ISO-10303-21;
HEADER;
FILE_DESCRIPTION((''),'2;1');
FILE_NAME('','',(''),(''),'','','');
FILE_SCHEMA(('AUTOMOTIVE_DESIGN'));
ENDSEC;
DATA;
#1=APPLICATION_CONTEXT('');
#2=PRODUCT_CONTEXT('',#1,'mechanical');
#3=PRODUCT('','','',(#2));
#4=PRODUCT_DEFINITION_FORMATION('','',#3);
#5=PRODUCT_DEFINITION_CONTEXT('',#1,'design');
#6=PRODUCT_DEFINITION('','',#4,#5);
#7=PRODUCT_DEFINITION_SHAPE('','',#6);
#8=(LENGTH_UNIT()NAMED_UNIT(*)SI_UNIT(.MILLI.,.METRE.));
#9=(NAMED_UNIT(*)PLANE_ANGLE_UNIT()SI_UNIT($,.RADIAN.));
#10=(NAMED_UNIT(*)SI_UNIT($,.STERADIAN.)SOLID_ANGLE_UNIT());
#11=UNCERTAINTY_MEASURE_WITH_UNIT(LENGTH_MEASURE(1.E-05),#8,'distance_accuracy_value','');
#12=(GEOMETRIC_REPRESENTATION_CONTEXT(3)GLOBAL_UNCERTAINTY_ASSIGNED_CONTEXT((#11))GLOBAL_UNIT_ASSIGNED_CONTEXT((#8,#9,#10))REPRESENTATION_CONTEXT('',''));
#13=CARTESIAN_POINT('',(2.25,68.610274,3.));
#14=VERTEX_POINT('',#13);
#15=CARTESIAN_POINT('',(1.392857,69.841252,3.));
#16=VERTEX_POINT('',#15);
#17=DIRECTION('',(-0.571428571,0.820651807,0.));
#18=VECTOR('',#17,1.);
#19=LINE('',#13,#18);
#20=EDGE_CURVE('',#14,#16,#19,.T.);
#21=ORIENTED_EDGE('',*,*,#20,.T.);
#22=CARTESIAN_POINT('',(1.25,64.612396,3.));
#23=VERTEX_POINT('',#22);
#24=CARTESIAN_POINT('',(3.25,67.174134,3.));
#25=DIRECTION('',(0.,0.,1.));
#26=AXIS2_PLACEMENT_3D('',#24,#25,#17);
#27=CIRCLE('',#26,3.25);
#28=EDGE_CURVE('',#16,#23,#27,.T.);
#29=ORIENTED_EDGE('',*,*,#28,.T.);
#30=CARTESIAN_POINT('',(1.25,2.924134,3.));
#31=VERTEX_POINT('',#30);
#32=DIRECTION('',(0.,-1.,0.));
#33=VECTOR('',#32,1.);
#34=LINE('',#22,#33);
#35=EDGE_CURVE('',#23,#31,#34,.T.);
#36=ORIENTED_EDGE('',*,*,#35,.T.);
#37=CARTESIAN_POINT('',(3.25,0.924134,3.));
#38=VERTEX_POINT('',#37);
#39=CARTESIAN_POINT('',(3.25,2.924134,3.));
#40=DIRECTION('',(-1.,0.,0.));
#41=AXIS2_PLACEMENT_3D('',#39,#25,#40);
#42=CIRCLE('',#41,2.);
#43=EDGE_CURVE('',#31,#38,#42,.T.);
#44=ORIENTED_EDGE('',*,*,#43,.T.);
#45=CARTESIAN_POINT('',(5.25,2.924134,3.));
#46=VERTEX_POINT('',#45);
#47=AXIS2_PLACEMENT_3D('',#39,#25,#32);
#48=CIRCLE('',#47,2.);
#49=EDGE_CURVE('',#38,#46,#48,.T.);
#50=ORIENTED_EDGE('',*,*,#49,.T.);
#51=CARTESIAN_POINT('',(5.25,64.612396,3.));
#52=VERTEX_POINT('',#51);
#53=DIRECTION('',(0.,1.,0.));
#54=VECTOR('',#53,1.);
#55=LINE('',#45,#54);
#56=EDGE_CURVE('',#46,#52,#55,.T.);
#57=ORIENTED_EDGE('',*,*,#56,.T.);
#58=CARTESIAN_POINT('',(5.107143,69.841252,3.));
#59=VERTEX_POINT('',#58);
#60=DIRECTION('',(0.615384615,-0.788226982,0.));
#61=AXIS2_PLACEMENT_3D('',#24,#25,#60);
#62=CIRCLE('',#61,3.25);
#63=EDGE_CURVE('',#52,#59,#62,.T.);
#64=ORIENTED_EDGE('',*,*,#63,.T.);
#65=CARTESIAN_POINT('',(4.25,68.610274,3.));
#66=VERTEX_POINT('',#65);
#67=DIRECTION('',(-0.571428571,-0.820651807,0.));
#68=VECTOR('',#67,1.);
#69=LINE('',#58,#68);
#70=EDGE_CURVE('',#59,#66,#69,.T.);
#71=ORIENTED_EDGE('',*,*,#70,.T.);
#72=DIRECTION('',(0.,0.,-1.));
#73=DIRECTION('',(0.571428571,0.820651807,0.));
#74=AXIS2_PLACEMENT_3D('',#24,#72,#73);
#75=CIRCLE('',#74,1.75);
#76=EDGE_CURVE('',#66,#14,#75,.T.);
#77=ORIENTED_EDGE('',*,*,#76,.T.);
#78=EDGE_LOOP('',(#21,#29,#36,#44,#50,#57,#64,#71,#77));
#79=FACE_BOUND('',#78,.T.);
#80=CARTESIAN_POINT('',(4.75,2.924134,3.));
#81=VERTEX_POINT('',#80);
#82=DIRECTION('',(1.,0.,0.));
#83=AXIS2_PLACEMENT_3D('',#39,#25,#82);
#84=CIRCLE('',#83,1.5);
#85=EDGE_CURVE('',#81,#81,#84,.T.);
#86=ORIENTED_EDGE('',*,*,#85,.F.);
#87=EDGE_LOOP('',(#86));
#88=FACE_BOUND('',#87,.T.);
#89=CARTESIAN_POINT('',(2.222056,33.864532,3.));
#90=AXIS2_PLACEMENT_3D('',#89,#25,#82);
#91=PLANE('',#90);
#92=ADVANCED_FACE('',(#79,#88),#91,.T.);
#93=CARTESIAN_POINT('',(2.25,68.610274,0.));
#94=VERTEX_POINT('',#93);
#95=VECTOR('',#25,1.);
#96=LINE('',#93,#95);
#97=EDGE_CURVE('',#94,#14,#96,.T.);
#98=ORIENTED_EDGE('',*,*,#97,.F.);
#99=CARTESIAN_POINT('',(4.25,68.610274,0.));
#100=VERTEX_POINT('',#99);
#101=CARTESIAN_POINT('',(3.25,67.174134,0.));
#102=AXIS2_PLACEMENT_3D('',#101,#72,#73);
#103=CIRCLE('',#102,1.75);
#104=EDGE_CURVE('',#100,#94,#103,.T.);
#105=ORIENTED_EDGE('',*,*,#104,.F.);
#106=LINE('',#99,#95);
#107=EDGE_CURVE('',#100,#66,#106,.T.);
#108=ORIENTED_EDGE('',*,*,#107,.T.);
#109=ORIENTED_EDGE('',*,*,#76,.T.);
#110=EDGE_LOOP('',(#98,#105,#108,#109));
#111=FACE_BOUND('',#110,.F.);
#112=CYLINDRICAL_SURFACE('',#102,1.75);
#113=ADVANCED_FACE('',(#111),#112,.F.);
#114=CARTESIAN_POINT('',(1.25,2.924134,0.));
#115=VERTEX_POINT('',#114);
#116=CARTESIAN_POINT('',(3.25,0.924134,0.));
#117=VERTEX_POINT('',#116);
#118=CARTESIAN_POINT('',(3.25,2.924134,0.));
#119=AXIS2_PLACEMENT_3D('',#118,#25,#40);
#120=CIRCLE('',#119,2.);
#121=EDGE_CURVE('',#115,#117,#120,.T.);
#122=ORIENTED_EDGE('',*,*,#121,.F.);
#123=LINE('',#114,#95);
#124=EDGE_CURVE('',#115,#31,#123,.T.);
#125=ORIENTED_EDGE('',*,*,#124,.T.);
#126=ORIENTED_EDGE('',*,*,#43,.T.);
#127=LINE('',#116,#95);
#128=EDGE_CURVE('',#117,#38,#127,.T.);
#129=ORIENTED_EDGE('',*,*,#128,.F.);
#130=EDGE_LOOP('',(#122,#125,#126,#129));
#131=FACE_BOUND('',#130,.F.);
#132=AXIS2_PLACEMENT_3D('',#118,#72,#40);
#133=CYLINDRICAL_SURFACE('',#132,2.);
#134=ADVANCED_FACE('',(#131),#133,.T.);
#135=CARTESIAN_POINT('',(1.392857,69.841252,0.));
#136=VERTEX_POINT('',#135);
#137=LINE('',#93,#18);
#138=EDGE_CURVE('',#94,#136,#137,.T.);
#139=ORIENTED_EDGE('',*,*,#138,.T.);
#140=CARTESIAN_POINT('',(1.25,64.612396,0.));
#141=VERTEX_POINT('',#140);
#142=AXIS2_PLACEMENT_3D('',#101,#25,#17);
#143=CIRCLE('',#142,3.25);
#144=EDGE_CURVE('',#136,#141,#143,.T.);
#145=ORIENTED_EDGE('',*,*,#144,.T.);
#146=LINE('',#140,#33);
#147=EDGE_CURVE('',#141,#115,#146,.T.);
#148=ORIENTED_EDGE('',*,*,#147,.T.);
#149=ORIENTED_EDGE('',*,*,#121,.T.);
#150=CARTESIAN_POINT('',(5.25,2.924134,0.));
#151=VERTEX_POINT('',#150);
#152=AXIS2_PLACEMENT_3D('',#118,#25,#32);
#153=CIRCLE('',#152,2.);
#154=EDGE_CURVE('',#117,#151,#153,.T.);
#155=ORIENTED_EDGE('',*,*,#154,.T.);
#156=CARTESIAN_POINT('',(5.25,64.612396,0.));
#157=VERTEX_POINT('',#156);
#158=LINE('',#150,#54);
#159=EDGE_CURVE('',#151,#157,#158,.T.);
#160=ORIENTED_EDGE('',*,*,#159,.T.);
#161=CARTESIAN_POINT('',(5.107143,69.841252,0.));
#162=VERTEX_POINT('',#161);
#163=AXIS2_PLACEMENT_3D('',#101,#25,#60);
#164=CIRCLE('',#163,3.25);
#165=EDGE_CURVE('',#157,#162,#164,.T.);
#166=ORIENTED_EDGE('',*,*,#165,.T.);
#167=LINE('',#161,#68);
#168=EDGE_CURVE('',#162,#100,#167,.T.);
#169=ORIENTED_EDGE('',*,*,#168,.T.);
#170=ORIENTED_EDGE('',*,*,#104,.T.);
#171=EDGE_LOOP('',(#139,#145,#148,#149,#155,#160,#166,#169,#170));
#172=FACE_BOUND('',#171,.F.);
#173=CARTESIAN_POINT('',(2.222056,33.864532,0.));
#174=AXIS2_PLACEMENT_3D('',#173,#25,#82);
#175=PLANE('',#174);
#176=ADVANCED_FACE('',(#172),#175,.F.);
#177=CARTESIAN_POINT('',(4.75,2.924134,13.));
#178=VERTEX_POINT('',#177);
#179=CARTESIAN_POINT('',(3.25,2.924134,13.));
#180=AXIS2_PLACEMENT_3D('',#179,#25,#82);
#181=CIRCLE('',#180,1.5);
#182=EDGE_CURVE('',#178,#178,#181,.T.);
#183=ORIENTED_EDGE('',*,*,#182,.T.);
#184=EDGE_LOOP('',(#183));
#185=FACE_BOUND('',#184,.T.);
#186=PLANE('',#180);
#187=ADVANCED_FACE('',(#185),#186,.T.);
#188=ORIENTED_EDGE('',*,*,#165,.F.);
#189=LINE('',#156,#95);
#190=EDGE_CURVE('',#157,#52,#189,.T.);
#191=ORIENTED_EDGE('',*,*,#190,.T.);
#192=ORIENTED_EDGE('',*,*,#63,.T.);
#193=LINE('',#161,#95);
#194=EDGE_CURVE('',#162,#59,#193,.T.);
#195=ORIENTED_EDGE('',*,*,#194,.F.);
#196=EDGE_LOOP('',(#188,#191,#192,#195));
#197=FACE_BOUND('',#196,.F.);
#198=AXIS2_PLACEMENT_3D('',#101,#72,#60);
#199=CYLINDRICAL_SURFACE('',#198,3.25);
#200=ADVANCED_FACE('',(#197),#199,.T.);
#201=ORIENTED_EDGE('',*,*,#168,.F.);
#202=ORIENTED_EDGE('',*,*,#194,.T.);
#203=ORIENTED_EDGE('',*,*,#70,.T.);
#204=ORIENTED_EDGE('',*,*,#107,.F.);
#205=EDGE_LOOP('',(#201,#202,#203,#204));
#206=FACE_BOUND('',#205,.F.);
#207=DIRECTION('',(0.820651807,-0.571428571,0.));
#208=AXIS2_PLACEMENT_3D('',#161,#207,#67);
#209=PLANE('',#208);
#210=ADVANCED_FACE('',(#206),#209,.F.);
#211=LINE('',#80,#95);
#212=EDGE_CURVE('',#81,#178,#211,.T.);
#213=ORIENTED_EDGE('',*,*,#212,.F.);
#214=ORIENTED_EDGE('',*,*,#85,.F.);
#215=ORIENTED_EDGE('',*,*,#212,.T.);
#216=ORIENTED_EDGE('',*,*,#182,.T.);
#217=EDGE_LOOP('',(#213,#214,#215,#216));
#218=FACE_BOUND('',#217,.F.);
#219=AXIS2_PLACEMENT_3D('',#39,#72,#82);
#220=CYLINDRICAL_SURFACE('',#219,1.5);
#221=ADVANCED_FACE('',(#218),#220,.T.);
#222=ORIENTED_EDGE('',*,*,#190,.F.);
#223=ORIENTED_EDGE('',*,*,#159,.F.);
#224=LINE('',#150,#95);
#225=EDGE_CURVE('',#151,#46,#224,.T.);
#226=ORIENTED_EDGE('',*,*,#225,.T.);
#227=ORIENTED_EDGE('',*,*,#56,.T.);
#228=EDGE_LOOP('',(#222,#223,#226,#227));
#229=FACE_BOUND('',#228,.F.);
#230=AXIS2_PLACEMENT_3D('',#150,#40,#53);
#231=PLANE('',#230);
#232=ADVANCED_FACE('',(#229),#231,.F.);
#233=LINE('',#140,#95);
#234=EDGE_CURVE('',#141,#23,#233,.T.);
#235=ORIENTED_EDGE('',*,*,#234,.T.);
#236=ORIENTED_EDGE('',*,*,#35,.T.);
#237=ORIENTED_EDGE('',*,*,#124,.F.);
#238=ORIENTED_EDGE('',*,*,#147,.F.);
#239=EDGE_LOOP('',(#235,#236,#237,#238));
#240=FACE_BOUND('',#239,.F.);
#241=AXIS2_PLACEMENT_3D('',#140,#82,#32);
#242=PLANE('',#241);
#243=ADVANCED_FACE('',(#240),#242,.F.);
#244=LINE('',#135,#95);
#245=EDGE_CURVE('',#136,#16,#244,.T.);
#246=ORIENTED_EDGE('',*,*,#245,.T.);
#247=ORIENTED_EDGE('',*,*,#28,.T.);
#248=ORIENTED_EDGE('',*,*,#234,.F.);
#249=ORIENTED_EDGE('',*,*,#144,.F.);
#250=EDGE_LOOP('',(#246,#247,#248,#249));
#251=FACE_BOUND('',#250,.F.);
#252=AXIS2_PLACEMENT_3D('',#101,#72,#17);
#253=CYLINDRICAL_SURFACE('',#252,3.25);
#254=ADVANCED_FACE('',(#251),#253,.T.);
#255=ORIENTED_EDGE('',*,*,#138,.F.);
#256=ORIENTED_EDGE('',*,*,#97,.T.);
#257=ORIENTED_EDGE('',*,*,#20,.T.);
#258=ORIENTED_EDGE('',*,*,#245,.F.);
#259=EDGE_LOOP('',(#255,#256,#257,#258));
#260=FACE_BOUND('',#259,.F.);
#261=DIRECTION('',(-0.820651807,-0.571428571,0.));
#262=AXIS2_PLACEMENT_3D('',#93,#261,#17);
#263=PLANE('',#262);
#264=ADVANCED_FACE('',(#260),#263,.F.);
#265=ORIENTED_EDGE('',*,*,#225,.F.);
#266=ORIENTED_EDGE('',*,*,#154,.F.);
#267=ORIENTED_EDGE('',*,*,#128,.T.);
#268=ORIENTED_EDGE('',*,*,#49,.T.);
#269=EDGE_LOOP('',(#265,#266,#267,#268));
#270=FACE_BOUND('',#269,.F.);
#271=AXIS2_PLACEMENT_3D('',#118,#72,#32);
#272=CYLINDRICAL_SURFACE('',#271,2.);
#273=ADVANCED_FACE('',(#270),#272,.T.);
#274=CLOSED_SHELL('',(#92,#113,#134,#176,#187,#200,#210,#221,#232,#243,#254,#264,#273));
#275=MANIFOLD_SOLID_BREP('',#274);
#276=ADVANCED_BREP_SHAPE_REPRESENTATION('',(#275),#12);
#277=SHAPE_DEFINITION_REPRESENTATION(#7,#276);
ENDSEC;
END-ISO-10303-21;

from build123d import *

# Parameters (mm, degrees)
F1_DEPTH = 3
F2_R     = 1.5
F3_DEPTH = 10


# Not quite as in the source:
# - a feature names something its author has since deleted; it is built from what else it names


with BuildPart() as f1:
    # F0 (on Top) → F1 (new body)
    with BuildSketch(Plane.XY):
        with BuildLine():
            ThreePointArc((3.25, 63.9241337907), (2.1924432633, 64.1010126169), (1.25, 64.6123960992))
            Line((1.25, 64.6123960992), (1.25, 2.9241337907))
            ThreePointArc((1.25, 2.9241337907), (1.8357864376, 4.338347353), (3.25, 4.9241337907))
            Line((3.25, 4.9241337907), (3.25, 63.9241337907))
        make_face()
        with BuildLine():
            ThreePointArc((3.25, 4.9241337907), (1.8357864376, 4.338347353), (1.25, 2.9241337907))
            ThreePointArc((1.25, 2.9241337907), (1.8357864376, 1.5099202283), (3.25, 0.9241337907))
            Line((3.25, 0.9241337907), (3.25, 4.9241337907))
        make_face()
        with BuildLine():
            ThreePointArc((5.25, 64.6123960992), (4.3075567367, 64.1010126169), (3.25, 63.9241337907))
            Line((3.25, 63.9241337907), (3.25, 4.9241337907))
            ThreePointArc((3.25, 4.9241337907), (4.6642135624, 4.338347353), (5.25, 2.9241337907))
            Line((5.25, 2.9241337907), (5.25, 64.6123960992))
        make_face()
        with BuildLine():
            ThreePointArc((5.25, 2.9241337907), (4.6642135624, 4.338347353), (3.25, 4.9241337907))
            Line((3.25, 4.9241337907), (3.25, 0.9241337907))
            ThreePointArc((3.25, 0.9241337907), (4.6642135624, 1.5099202283), (5.25, 2.9241337907))
        make_face()
        with BuildLine():
            Line((2.25, 68.6102744523), (1.3928571429, 69.8412521623))
            ThreePointArc((1.3928571429, 69.8412521623), (0.0012122742, 67.2628936507), (1.25, 64.6123960992))
            ThreePointArc((1.25, 64.6123960992), (2.1924432633, 64.1010126169), (3.25, 63.9241337907))
            ThreePointArc((3.25, 63.9241337907), (4.3075567367, 64.1010126169), (5.25, 64.6123960992))
            ThreePointArc((5.25, 64.6123960992), (6.4987877258, 67.2628936507), (5.1071428571, 69.8412521623))
            Line((5.1071428571, 69.8412521623), (4.25, 68.6102744523))
            ThreePointArc((4.25, 68.6102744523), (3.25, 65.4241337907), (2.25, 68.6102744523))
        make_face()
    extrude(amount=F1_DEPTH)

    # F2 (on face) → F3 (join)
    with BuildSketch(Plane.XY.offset(3)):
        with Locations((3.25, 2.9241337907)):
            Circle(F2_R)
    extrude(amount=F3_DEPTH)


solid = f1.part
